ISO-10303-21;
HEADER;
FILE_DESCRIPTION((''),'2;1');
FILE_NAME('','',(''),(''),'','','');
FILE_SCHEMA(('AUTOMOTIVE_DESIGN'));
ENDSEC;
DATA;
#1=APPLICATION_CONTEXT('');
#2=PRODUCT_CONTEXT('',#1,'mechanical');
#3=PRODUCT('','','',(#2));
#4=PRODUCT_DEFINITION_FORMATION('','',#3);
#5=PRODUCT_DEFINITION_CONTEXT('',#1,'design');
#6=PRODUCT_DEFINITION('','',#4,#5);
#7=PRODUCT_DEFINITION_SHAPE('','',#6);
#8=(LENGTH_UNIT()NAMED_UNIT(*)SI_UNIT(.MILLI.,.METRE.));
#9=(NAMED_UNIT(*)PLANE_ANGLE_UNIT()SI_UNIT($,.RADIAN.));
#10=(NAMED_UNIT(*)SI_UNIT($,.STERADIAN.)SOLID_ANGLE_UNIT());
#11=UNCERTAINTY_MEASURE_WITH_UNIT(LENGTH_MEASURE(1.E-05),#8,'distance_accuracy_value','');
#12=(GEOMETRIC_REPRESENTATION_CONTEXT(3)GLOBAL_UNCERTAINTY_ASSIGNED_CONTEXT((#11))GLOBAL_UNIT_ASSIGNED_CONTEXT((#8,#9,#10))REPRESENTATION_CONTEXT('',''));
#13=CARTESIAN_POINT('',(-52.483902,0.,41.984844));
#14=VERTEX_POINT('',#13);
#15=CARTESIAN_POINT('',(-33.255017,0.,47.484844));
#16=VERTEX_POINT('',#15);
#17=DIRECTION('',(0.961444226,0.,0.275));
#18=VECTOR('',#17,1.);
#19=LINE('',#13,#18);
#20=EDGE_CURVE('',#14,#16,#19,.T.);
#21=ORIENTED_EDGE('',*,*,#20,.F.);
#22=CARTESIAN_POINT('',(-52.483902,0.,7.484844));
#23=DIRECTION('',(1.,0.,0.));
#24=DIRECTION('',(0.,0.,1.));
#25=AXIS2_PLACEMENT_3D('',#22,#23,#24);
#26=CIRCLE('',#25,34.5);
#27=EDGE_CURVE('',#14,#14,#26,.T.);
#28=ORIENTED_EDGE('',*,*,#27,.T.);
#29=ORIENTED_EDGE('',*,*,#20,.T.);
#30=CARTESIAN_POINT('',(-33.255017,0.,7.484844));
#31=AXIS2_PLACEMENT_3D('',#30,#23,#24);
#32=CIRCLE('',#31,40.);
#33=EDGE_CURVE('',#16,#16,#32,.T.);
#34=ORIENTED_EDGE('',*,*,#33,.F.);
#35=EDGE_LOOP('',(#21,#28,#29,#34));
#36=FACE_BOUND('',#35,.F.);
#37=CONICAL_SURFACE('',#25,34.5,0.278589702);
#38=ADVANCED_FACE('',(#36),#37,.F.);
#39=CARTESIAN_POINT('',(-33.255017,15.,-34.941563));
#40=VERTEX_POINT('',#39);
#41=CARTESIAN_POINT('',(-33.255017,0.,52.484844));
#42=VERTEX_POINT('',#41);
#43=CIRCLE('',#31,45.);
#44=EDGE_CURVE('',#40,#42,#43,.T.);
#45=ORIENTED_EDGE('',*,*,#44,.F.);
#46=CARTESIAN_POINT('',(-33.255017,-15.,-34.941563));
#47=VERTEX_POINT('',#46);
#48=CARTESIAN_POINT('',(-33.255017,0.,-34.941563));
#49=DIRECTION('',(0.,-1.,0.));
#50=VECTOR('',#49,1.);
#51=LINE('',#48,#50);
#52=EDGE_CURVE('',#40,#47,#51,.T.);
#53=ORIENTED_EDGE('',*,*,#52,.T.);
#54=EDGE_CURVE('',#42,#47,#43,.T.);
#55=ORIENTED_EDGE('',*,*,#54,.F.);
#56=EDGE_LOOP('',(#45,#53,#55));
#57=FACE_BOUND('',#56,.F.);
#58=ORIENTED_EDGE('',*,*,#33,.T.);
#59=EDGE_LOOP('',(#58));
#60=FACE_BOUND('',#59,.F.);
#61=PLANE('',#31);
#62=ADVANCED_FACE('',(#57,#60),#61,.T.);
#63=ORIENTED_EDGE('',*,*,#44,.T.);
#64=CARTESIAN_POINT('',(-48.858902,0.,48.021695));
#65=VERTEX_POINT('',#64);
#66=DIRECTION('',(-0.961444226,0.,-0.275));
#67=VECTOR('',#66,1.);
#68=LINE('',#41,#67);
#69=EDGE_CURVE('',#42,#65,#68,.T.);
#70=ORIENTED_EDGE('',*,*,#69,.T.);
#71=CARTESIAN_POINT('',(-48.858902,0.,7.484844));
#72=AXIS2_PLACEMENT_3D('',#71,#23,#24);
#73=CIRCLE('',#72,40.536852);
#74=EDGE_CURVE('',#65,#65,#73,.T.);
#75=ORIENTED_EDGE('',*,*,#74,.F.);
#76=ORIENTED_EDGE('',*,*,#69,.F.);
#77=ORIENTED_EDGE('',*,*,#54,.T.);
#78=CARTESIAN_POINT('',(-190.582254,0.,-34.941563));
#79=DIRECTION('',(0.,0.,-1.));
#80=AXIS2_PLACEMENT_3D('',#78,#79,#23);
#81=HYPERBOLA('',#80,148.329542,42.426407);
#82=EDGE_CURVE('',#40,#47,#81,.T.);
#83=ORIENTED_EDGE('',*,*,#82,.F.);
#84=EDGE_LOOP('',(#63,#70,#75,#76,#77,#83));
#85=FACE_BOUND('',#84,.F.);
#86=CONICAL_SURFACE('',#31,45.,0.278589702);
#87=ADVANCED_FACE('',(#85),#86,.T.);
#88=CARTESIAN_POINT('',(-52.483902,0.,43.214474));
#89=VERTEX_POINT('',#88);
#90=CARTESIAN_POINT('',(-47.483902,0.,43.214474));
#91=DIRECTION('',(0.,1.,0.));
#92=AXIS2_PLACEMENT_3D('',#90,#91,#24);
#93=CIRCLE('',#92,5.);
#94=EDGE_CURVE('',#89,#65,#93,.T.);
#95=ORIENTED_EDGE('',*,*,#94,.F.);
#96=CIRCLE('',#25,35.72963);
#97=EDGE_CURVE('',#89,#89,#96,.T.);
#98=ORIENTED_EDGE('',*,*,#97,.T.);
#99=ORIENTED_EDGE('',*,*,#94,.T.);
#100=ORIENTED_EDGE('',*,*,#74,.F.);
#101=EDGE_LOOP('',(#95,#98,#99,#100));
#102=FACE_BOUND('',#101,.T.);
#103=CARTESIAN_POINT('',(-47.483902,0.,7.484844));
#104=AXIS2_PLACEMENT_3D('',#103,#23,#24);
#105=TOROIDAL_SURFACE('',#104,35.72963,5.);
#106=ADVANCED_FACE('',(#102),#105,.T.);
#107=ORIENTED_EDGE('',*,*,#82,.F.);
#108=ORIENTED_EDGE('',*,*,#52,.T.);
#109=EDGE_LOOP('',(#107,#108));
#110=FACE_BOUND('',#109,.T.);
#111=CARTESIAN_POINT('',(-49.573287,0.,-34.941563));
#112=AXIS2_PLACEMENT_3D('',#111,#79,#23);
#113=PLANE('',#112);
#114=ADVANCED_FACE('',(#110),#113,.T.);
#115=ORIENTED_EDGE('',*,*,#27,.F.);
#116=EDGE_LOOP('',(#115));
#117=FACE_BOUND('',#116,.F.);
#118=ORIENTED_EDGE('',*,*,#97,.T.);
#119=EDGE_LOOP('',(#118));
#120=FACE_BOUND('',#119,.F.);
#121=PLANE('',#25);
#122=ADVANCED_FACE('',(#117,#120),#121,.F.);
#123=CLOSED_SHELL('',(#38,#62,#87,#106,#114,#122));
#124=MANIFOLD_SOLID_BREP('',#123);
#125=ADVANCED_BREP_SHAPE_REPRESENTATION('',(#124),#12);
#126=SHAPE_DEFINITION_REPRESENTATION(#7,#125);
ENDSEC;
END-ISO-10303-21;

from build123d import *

# Parameters (mm, degrees)
F2_W     = 50
F2_H     = 12.9609592259
F3_DEPTH = 35.1
F4_R     = 5


# Not quite as in the source:
# - a feature names something its author has since deleted; it is built from what else it names


with BuildPart() as f1:
    # F0 (on Front) → F1 (revolve)
    with BuildSketch(Plane.XZ):
        Polygon((-52.483901754, 46.9848437961), (-52.483901754, 41.9848437961), (-33.255017231, 47.4848437961), (-33.255017231, 52.4848437961), align=None)
    revolve(axis=Axis((-42.8694594925, 0, 7.4848437961), (1, 0, 0)))

    # F2 (on Front) → F3 (cut, symmetric)
    with BuildSketch(Plane.XZ):
        with Locations((-24.5732873678, -41.422042688)):
            Rectangle(F2_W, F2_H)
    extrude(amount=F3_DEPTH, both=True, mode=Mode.SUBTRACT)

    # F4
    f4_edges = [f1.edges().sort_by_distance(p)[0] for p in [
        (-52.483902, 0, -32.015156),
    ]]
    fillet(f4_edges, radius=F4_R)


solid = f1.part
